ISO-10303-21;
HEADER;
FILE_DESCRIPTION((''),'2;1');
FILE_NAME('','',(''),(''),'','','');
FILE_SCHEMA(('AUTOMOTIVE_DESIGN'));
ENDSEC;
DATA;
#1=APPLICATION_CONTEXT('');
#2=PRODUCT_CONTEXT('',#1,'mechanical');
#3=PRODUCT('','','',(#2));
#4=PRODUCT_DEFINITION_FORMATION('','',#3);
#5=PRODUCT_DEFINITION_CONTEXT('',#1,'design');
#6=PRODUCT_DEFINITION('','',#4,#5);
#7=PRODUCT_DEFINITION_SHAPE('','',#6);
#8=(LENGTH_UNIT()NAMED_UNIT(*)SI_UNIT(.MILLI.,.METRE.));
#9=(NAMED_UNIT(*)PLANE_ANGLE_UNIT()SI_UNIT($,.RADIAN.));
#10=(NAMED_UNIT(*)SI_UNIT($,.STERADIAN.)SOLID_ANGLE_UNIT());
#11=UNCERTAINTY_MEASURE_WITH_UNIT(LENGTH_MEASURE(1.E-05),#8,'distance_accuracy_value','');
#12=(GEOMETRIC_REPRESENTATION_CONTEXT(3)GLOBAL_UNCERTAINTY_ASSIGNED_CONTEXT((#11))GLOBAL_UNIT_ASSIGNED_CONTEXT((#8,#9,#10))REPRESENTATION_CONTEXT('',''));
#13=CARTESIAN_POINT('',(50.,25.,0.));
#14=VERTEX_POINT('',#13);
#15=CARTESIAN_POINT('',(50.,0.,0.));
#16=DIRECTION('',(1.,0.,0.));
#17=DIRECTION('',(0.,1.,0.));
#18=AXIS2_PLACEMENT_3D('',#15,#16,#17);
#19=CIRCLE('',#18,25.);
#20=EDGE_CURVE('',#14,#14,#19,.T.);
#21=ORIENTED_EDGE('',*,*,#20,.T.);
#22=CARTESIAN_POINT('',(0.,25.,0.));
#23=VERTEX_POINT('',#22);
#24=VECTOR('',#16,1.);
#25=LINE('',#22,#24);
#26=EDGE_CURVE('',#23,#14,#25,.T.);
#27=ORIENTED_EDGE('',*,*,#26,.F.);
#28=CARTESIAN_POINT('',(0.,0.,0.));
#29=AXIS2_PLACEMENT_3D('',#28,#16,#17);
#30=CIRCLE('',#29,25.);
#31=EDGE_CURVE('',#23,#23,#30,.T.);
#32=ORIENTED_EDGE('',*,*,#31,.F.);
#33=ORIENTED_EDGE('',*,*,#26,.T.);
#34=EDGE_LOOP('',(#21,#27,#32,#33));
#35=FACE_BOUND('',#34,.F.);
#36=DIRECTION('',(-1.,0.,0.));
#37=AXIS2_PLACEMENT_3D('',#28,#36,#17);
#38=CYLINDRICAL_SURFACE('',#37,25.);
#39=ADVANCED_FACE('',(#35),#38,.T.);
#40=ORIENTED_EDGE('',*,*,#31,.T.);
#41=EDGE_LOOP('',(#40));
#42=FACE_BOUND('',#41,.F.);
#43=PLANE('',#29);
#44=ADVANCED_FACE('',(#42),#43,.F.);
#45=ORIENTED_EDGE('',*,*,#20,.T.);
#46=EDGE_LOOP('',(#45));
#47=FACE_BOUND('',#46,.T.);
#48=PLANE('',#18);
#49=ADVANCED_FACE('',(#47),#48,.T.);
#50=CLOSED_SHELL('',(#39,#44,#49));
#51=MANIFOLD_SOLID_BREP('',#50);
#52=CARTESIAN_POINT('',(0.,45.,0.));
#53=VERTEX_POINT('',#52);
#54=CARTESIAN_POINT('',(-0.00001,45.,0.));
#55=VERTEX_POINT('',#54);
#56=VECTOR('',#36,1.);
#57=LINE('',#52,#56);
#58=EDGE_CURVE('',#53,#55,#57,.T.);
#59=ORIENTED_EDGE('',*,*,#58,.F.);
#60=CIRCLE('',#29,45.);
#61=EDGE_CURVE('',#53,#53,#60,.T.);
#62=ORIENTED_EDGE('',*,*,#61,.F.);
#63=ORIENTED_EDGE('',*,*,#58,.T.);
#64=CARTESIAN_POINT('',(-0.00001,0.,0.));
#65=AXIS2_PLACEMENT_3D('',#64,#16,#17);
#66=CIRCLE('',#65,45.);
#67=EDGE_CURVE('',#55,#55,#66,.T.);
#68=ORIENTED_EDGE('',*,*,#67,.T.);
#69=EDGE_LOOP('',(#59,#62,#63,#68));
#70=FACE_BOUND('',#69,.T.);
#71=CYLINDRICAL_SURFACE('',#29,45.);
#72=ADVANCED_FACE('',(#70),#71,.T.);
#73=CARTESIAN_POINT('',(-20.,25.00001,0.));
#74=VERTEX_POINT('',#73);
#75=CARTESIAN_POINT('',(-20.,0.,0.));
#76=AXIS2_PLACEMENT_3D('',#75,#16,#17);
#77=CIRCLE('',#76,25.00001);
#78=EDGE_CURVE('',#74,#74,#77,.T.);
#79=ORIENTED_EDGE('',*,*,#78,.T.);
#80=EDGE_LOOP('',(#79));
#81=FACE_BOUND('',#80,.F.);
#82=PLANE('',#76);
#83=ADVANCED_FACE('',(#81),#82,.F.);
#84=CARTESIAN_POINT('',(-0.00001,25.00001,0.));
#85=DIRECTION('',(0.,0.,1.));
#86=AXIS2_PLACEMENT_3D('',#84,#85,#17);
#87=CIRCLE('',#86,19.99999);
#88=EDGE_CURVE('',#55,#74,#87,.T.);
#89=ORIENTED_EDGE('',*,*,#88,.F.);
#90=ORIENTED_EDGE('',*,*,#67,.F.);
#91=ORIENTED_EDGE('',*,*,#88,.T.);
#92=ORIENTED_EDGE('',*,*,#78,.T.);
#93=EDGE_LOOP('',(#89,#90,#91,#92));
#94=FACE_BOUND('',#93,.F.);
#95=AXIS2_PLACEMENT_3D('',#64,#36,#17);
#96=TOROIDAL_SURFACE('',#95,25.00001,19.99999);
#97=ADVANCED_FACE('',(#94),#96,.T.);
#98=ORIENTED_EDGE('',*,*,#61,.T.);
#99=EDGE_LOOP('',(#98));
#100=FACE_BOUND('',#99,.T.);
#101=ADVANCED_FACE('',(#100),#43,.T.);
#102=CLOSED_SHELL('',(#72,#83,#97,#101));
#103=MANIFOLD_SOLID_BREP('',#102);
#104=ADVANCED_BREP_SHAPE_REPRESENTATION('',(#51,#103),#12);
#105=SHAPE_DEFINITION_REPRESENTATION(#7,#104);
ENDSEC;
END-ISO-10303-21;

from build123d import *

# Parameters (mm, degrees)
F0_R     = 25
F1_DEPTH = 50
F0_R_2   = 45
F2_DEPTH = 20
F3_R     = 19.99999


# Not quite as in the source:
# - a fillet or chamfer is up to 0.001 mm smaller than in the source, because OpenCascade refuses the exact size


with BuildPart() as f1:
    # F0 (on Right) → F1 (new body)
    with BuildSketch(Plane.YZ):
        Circle(F0_R)
    extrude(amount=F1_DEPTH)


with BuildPart() as f2:
    # F0 (on Right) → F2 (new body)
    with BuildSketch(Plane.YZ):
        Circle(F0_R_2)
        Circle(F0_R, mode=Mode.SUBTRACT)
        Circle(F0_R)
    extrude(amount=-F2_DEPTH)

    # F3 (radius 20 in the source; OpenCascade refuses exactly that, so slightly less here)
    f3_edges = [f2.edges().sort_by_distance(p)[0] for p in [
        (-20, -45, 0),
    ]]
    fillet(f3_edges, radius=F3_R)


solid = Compound([f1.part, f2.part])
